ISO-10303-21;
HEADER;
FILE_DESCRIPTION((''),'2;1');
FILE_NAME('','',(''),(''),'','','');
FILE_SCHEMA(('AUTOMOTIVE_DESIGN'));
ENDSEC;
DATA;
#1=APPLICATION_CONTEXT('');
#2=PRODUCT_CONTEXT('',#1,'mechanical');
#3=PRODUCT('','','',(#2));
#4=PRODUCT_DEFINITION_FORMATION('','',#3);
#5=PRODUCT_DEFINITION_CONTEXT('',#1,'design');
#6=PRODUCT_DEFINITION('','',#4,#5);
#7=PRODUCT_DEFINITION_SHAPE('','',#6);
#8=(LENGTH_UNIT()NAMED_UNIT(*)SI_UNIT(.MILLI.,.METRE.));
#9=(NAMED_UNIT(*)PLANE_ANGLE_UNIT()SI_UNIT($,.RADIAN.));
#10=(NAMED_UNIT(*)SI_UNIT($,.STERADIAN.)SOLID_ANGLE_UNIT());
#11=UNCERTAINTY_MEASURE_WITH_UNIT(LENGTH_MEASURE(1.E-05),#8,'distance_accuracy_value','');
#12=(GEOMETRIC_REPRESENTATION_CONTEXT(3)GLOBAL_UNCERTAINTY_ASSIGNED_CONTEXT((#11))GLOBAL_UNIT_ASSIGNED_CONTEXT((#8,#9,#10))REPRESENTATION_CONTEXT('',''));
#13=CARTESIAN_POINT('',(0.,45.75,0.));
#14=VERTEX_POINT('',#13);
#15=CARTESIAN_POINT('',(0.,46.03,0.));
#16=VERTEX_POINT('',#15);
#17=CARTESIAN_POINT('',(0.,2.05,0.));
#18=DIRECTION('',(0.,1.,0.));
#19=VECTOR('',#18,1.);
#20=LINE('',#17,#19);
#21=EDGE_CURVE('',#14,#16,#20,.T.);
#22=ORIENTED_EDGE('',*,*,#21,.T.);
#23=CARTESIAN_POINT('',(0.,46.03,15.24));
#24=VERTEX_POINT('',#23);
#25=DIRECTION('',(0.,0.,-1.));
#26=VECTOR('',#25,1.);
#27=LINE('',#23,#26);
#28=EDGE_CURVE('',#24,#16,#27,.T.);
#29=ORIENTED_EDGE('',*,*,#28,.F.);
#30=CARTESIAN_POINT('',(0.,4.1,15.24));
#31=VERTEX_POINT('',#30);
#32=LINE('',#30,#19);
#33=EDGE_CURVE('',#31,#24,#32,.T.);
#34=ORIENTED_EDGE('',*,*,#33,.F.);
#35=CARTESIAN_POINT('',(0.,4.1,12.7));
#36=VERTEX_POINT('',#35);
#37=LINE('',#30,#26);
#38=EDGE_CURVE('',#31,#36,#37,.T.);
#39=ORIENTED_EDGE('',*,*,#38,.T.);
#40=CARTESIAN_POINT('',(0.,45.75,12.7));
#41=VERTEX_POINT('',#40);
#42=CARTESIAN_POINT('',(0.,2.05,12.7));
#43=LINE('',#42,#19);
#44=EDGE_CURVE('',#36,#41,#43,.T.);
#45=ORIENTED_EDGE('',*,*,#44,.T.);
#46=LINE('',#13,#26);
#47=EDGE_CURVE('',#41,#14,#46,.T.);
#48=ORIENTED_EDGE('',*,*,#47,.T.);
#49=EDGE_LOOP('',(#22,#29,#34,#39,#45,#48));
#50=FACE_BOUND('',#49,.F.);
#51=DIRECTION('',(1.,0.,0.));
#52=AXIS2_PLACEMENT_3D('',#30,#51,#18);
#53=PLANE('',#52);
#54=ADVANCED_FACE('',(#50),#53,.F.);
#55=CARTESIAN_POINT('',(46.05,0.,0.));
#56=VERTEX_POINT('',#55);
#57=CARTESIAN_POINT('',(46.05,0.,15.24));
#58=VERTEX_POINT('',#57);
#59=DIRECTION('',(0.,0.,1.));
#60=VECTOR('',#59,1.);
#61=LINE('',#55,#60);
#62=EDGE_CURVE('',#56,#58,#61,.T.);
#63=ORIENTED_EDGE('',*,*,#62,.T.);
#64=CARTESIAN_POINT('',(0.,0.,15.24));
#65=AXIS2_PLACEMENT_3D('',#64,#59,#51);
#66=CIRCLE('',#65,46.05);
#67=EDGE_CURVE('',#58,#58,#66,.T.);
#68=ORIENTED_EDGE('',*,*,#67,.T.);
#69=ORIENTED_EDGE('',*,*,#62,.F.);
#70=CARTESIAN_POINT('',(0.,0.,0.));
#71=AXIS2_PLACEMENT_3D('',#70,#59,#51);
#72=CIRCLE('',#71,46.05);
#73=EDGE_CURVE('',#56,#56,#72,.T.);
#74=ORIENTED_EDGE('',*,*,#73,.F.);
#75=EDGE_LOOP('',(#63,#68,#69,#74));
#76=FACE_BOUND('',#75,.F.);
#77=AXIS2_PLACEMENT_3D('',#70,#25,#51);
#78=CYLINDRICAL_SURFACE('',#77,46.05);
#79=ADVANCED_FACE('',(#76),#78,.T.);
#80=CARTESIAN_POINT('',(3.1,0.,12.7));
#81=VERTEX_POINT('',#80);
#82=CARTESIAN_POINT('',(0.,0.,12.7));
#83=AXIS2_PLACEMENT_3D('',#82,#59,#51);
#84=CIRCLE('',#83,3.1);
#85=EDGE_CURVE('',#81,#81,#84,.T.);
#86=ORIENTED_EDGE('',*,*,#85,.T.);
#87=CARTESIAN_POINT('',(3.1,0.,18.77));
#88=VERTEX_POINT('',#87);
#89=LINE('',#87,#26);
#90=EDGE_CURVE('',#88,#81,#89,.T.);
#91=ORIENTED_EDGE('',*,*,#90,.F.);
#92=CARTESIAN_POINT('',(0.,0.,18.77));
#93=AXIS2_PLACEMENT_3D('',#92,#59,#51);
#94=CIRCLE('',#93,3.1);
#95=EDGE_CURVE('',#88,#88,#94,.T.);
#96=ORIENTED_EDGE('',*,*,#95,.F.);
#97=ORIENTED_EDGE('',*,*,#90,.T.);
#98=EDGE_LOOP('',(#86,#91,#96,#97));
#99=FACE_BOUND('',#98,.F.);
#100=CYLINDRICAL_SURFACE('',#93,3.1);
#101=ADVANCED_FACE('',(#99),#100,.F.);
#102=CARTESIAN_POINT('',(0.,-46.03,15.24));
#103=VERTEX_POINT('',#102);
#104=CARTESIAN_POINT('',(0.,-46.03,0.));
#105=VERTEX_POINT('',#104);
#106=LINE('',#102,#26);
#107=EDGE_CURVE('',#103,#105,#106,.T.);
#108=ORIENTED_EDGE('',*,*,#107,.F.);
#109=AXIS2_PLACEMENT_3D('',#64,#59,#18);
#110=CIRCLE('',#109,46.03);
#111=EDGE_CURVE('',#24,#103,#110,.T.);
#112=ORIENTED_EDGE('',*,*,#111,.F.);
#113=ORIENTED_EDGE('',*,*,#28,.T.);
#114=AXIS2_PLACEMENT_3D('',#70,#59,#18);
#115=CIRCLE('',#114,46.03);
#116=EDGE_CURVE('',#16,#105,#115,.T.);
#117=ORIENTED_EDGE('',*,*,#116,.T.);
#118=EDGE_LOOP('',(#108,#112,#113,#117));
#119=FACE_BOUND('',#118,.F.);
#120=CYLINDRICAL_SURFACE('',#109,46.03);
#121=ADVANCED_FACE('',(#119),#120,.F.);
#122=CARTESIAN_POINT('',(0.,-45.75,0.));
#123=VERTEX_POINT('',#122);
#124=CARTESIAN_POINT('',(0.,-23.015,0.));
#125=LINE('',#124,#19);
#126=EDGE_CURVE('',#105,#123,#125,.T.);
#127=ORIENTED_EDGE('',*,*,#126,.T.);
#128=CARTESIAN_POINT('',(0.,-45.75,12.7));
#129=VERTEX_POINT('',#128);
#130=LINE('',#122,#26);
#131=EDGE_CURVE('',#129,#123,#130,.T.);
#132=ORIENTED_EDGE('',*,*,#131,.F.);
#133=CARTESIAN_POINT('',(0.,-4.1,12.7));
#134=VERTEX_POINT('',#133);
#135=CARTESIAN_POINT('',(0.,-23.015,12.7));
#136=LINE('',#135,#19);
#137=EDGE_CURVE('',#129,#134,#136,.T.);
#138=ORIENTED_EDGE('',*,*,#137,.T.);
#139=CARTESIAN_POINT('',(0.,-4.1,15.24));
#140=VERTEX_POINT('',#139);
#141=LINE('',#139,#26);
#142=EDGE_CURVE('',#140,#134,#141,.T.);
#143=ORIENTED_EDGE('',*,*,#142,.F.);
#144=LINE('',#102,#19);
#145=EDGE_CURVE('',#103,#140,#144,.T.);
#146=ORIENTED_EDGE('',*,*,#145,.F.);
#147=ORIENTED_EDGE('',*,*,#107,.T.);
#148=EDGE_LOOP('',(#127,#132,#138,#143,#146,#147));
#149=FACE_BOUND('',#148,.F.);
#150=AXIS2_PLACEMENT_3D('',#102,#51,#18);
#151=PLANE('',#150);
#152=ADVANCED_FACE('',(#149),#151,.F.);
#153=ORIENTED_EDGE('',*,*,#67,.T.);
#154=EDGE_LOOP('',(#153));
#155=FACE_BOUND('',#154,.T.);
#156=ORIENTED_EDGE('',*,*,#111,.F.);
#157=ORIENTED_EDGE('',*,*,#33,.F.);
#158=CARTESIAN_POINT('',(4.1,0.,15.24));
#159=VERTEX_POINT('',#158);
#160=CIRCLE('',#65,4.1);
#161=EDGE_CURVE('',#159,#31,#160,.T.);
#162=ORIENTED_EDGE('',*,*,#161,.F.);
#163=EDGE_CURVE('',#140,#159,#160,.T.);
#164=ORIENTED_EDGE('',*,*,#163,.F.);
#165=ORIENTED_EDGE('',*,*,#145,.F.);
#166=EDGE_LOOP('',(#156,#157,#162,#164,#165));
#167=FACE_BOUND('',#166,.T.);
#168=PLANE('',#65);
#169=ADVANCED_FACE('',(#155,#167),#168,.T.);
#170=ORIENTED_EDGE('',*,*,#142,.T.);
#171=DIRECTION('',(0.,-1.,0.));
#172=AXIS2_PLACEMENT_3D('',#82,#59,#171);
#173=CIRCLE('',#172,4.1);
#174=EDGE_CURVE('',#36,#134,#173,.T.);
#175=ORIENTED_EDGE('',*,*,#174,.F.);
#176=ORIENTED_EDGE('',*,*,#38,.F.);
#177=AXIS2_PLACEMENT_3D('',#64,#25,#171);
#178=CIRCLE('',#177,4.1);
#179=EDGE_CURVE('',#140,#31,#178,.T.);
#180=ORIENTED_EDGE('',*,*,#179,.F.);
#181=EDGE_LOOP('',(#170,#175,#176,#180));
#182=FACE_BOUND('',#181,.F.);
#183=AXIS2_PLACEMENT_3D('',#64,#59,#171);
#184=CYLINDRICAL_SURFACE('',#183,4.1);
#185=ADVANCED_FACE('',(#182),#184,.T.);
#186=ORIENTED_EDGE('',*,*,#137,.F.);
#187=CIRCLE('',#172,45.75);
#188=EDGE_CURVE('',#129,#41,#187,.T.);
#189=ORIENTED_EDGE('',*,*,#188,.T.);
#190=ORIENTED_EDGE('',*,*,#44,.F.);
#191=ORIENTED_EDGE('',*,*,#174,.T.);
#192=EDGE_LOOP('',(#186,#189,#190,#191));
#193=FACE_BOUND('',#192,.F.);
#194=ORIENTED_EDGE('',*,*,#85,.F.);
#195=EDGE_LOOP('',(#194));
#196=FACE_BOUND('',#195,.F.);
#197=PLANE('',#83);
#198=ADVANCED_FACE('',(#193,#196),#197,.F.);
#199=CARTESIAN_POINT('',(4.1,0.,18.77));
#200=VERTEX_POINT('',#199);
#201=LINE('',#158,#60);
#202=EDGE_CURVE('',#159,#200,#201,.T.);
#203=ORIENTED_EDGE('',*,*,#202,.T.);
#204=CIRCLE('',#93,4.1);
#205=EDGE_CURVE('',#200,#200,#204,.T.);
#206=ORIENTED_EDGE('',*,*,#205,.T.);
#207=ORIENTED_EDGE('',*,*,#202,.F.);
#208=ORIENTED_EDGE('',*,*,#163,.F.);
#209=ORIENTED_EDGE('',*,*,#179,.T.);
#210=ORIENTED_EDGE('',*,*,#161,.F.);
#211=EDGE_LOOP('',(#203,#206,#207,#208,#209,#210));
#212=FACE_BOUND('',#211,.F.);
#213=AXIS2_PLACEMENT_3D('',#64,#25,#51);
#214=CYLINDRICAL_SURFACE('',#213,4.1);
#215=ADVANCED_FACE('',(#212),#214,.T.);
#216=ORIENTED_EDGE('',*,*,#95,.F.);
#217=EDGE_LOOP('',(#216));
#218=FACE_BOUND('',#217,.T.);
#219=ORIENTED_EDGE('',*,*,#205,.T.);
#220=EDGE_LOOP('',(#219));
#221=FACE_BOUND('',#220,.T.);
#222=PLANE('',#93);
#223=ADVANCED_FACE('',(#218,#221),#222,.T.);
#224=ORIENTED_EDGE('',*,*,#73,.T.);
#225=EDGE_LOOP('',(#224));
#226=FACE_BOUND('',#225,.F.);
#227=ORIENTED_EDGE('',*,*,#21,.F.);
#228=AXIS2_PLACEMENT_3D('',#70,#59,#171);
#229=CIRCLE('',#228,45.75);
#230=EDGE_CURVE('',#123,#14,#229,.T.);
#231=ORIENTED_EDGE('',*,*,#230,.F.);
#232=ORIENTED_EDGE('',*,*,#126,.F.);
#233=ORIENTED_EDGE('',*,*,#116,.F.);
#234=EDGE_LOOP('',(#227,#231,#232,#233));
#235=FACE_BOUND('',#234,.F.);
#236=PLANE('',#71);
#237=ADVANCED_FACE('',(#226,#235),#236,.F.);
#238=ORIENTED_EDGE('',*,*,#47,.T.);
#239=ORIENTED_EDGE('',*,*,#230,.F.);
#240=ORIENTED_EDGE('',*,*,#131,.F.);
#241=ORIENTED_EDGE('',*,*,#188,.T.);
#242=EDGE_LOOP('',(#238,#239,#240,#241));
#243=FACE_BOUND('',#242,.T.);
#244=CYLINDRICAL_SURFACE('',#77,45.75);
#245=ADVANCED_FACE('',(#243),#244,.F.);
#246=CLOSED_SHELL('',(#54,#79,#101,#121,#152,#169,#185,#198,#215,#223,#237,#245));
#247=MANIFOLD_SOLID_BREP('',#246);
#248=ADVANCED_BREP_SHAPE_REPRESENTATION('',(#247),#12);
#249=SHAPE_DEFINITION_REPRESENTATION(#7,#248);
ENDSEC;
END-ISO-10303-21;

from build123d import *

# Parameters (mm, degrees)
F0_R          = 46.05
F1_DEPTH      = 15.24
F2_R          = 45.75
F3_DEPTH      = 12.7
F4_R          = 4.1
F5_DEPTH      = 3.53
F5_DEPTH_BACK = 1
F7_DEPTH      = 15.241
F8_R          = 3.1
F9_DEPTH      = 18.771


# Not quite as in the source:
# - after a boolean that leaves OpenCascade's solid faulty, fix() repairs it


with BuildPart() as f1:
    # F0 (on Top) → F1 (new body)
    with BuildSketch(Plane.XY):
        Circle(F0_R)
    extrude(amount=F1_DEPTH)

    # F2 (on Top) → F3 (cut)
    with BuildSketch(Plane.XY):
        Circle(F2_R)
    extrude(amount=F3_DEPTH, mode=Mode.SUBTRACT)

    # F4 (on face) → F5 (join, two sides)
    with BuildSketch(Plane.XY.offset(15.24)) as f5_sk:
        Circle(F4_R)
    extrude(amount=F5_DEPTH)
    extrude(f5_sk.sketch, amount=-F5_DEPTH_BACK)

    # F6 (on face) → F7 (cut, through all)
    with BuildSketch(Plane.XY.offset(15.24)):
        with BuildLine():
            Line((0, 4.1), (0, 46.03))
            ThreePointArc((0, 46.03), (-46.03, 0), (0, -46.03))
            Line((0, -46.03), (0, -4.1))
            ThreePointArc((0, -4.1), (-4.1, 0), (0, 4.1))
        make_face()
    extrude(amount=-F7_DEPTH, mode=Mode.SUBTRACT)

    add(f1.part.fix(), mode=Mode.REPLACE)

    # F8 (on face) → F9 (cut, through all)
    with BuildSketch(Plane.XY.offset(18.77)):
        Circle(F8_R)
    extrude(amount=-F9_DEPTH, mode=Mode.SUBTRACT)


solid = f1.part
